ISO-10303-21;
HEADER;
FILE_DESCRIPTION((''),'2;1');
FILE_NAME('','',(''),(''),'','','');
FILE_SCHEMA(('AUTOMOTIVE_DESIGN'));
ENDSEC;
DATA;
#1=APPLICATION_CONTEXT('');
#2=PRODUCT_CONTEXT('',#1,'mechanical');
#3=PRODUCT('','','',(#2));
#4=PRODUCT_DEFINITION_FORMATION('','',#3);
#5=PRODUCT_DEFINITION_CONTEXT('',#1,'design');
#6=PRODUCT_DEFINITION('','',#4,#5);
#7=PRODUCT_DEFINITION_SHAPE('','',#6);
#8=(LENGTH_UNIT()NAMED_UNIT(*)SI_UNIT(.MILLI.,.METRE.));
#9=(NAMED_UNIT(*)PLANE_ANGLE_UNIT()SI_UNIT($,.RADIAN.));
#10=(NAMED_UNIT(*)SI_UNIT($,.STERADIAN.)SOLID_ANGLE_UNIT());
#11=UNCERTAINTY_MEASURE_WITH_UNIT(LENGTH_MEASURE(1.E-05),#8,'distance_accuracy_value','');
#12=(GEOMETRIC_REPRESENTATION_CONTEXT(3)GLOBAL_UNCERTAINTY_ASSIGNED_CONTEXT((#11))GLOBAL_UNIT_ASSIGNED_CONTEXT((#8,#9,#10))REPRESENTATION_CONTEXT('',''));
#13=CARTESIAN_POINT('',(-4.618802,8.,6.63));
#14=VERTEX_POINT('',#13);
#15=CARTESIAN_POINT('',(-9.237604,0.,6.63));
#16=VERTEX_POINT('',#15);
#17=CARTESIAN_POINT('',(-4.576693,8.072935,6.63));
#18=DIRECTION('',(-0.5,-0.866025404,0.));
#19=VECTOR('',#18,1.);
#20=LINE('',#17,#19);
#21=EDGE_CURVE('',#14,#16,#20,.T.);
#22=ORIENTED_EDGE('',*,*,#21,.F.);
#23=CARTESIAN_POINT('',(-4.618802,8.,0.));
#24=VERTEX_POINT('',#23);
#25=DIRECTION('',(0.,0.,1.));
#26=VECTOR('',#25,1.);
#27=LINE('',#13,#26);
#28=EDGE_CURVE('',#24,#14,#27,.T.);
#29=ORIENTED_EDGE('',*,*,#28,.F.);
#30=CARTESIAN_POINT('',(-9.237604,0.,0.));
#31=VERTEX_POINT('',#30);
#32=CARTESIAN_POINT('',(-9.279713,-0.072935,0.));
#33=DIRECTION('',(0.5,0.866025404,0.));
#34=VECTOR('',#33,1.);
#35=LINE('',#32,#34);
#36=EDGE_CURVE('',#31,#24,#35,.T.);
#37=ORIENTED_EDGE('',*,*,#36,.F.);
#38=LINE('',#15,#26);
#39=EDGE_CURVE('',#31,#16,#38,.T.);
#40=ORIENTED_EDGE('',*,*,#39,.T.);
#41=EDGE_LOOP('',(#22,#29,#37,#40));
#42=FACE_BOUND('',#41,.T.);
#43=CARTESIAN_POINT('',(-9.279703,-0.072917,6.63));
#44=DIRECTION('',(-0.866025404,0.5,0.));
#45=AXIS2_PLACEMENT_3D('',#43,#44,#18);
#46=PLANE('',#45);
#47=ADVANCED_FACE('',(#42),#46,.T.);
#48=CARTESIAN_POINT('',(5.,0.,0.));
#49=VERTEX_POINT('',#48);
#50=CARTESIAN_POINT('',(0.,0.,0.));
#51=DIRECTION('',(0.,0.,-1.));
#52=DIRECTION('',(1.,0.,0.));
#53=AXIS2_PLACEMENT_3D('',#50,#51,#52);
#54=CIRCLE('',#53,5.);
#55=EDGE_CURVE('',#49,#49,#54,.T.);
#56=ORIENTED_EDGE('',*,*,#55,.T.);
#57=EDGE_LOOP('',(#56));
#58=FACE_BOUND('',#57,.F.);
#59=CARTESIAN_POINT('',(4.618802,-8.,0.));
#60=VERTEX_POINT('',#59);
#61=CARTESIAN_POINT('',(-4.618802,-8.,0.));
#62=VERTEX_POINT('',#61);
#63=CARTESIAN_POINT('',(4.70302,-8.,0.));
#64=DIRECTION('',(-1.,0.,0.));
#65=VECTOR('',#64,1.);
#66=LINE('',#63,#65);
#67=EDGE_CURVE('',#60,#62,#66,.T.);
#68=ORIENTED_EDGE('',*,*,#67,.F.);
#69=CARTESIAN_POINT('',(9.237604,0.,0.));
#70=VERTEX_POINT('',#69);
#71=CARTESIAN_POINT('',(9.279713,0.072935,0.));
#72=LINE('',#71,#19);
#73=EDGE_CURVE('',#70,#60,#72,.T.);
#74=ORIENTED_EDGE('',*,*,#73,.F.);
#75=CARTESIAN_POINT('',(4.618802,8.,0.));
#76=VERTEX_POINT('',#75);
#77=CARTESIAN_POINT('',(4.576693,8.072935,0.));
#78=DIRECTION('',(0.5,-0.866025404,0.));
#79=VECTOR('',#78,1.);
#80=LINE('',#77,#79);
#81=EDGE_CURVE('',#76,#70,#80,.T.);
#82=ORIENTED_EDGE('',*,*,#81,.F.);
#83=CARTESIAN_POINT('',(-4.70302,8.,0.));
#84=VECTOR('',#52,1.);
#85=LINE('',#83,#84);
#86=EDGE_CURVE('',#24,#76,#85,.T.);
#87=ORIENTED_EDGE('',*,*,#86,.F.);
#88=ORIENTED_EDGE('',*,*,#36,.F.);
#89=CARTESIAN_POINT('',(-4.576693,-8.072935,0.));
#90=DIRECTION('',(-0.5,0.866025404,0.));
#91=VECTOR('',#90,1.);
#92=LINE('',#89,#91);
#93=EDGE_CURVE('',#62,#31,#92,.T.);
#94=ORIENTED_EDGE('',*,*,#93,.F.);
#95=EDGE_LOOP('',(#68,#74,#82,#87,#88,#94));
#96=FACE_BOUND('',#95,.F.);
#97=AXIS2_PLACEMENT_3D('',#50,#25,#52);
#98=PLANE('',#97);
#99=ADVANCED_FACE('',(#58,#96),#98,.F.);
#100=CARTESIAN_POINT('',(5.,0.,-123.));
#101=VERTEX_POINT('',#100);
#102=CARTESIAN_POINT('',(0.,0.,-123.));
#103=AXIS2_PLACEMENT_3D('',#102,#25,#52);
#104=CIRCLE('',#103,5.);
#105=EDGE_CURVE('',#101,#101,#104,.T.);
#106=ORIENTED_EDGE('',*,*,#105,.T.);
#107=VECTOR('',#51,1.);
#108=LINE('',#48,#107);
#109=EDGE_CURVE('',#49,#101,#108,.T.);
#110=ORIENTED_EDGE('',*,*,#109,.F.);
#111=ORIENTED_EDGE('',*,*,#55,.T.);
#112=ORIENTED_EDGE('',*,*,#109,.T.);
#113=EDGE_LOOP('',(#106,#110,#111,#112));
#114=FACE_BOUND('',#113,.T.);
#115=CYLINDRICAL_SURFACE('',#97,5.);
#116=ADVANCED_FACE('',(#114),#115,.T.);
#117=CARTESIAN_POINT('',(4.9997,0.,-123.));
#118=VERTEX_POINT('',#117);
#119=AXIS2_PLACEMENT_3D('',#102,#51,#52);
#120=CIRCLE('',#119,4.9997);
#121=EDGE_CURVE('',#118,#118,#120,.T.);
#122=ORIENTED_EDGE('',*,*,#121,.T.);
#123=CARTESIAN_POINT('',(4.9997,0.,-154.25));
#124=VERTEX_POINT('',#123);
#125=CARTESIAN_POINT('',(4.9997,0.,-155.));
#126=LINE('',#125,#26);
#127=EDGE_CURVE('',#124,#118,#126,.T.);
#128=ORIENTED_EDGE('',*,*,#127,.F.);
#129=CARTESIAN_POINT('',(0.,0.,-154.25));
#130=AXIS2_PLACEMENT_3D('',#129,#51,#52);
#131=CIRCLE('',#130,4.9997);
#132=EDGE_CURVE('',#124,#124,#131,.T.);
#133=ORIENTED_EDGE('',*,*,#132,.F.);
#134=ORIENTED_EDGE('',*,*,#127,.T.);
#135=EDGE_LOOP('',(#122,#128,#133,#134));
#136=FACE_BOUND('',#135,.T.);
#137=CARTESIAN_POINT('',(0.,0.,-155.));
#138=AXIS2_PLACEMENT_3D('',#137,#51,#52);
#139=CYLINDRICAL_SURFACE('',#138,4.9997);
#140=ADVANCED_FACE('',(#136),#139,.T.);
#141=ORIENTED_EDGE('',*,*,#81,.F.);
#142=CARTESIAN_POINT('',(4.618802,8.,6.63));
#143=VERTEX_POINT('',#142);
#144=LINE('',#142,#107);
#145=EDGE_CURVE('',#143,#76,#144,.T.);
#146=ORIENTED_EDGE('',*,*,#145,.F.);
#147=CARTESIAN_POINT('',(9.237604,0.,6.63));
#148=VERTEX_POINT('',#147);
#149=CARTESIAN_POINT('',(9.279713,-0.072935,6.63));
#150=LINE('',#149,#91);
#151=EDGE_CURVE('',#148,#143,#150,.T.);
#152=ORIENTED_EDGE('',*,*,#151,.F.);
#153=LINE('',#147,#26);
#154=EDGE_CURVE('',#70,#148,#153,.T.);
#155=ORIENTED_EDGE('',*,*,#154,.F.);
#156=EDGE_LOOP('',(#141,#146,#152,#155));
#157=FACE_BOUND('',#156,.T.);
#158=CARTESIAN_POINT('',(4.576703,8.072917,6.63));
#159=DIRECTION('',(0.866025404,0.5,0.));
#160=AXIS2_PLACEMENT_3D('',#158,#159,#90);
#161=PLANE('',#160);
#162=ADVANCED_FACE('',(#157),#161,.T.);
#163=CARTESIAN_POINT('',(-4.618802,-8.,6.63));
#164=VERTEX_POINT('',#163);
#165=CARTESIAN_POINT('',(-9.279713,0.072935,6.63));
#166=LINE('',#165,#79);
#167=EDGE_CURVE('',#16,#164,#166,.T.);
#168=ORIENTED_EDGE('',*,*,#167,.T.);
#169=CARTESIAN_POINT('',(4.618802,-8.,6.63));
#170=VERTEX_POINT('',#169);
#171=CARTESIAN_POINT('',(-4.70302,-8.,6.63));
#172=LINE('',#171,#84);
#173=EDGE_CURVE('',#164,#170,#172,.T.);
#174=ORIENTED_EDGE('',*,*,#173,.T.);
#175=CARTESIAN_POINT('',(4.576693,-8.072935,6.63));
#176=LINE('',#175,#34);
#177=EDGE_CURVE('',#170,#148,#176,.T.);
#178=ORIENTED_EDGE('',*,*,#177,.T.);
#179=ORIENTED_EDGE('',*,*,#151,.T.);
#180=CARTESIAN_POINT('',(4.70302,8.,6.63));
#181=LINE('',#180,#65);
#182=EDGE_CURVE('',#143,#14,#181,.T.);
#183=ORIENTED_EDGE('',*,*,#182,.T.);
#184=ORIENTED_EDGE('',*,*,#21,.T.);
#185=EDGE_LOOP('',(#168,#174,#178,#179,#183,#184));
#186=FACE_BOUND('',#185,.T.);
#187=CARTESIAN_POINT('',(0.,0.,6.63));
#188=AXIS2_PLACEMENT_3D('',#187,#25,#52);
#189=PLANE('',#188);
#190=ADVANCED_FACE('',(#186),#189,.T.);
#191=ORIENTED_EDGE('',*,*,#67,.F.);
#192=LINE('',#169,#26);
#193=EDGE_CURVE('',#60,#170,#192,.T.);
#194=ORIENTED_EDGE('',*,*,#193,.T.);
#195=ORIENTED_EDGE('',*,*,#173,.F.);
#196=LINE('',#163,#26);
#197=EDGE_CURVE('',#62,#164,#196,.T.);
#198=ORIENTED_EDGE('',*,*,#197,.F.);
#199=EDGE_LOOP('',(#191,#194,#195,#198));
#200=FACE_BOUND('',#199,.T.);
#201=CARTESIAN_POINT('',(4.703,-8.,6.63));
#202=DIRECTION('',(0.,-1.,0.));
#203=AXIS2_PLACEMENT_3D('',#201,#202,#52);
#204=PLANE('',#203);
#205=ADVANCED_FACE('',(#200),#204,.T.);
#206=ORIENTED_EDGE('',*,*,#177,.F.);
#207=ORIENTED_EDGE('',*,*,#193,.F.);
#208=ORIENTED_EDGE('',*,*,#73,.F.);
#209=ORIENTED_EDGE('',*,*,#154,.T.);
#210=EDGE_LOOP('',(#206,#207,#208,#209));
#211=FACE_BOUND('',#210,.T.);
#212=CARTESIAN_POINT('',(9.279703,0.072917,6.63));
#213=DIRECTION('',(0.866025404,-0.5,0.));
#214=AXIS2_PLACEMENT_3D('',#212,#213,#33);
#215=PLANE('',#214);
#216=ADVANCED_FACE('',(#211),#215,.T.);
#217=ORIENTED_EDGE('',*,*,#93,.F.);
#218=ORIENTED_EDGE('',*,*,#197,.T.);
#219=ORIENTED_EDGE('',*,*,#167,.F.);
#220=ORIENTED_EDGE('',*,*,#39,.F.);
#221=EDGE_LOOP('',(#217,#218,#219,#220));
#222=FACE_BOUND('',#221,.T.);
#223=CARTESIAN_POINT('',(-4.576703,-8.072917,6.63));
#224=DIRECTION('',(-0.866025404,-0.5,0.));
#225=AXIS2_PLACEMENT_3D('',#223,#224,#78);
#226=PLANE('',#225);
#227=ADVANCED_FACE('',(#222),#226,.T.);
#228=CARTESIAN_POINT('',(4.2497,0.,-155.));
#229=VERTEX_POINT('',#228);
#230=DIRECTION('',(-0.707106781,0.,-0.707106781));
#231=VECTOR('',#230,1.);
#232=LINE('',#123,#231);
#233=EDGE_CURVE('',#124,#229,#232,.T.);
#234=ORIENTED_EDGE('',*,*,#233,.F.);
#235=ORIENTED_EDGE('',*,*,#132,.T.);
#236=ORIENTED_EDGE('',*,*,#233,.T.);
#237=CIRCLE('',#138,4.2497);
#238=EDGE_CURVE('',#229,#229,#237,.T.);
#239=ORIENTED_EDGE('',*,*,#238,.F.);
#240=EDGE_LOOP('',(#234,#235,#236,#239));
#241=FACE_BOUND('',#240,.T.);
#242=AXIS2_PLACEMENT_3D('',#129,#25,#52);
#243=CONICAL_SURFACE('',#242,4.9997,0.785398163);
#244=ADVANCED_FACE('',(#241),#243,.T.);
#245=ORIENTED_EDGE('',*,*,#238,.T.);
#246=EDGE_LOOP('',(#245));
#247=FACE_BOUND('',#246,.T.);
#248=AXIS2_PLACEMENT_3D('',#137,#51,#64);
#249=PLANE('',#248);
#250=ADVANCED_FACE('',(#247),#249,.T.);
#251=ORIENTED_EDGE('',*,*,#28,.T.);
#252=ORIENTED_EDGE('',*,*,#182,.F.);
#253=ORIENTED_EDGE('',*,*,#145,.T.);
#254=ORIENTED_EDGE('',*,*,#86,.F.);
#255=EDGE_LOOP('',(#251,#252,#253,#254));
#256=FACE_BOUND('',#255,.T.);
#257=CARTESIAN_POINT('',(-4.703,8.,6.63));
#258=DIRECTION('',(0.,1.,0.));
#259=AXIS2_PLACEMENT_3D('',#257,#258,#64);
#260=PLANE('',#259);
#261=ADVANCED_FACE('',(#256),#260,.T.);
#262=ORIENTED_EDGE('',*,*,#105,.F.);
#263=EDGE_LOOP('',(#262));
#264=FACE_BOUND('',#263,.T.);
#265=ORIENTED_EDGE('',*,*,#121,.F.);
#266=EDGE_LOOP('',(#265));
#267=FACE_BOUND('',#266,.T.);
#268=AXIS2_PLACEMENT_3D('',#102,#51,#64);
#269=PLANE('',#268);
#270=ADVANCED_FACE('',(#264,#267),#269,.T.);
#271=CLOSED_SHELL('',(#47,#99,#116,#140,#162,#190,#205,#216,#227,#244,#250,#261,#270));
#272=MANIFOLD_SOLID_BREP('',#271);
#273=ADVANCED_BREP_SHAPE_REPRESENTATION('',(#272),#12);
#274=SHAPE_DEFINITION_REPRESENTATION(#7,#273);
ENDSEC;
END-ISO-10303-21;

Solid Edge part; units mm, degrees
sketch "Sketch1" plane through (0, 0, 0) normal (0, 0, 1) x (1, 0, 0)
  circle A0 centre (0, 0) radius 9.28
  dimension "D1" = 18.56
extrude "Protrusion1" add sketch "Sketch1" along normal blind 6.63
sketch "Sketch2" plane through (0, 0, 0) normal (0, 0, -1) x (1, 0, 0)
  circle A0 centre (0, 0) radius 5
extrude "Protrusion2" add sketch "Sketch2" along normal blind 155
sketch "Sketch3" plane through (0, 0, -155) normal (0, 0, -1) x (1, 0, 0)
  circle A0 centre (0, 0) radius 4.9997
extrude "Cutout1" cut sketch "Sketch3" against normal blind 32 flip side to cut
chamfer "Chamfer_1" distance 0.75 angle 45 1 edges at (-4.9997, 0, -155)
sketch "Sketch4" plane through (0, 0, 6.63) normal (0, 0, 1) x (1, 0, 0)
  line L0 (-4.703, 8) -> (4.703, 8)
  dimension "D1" = 16
extrude "Cutout2" cut sketch "Sketch4" against normal up to next material side at (0, 8.05, 6.63)
pattern_circular "Pattern1" count 6 over 360 about axis through (0, 0, 6.63) along (0, 0, 1) of "Cutout2"
properties part number "119177"
